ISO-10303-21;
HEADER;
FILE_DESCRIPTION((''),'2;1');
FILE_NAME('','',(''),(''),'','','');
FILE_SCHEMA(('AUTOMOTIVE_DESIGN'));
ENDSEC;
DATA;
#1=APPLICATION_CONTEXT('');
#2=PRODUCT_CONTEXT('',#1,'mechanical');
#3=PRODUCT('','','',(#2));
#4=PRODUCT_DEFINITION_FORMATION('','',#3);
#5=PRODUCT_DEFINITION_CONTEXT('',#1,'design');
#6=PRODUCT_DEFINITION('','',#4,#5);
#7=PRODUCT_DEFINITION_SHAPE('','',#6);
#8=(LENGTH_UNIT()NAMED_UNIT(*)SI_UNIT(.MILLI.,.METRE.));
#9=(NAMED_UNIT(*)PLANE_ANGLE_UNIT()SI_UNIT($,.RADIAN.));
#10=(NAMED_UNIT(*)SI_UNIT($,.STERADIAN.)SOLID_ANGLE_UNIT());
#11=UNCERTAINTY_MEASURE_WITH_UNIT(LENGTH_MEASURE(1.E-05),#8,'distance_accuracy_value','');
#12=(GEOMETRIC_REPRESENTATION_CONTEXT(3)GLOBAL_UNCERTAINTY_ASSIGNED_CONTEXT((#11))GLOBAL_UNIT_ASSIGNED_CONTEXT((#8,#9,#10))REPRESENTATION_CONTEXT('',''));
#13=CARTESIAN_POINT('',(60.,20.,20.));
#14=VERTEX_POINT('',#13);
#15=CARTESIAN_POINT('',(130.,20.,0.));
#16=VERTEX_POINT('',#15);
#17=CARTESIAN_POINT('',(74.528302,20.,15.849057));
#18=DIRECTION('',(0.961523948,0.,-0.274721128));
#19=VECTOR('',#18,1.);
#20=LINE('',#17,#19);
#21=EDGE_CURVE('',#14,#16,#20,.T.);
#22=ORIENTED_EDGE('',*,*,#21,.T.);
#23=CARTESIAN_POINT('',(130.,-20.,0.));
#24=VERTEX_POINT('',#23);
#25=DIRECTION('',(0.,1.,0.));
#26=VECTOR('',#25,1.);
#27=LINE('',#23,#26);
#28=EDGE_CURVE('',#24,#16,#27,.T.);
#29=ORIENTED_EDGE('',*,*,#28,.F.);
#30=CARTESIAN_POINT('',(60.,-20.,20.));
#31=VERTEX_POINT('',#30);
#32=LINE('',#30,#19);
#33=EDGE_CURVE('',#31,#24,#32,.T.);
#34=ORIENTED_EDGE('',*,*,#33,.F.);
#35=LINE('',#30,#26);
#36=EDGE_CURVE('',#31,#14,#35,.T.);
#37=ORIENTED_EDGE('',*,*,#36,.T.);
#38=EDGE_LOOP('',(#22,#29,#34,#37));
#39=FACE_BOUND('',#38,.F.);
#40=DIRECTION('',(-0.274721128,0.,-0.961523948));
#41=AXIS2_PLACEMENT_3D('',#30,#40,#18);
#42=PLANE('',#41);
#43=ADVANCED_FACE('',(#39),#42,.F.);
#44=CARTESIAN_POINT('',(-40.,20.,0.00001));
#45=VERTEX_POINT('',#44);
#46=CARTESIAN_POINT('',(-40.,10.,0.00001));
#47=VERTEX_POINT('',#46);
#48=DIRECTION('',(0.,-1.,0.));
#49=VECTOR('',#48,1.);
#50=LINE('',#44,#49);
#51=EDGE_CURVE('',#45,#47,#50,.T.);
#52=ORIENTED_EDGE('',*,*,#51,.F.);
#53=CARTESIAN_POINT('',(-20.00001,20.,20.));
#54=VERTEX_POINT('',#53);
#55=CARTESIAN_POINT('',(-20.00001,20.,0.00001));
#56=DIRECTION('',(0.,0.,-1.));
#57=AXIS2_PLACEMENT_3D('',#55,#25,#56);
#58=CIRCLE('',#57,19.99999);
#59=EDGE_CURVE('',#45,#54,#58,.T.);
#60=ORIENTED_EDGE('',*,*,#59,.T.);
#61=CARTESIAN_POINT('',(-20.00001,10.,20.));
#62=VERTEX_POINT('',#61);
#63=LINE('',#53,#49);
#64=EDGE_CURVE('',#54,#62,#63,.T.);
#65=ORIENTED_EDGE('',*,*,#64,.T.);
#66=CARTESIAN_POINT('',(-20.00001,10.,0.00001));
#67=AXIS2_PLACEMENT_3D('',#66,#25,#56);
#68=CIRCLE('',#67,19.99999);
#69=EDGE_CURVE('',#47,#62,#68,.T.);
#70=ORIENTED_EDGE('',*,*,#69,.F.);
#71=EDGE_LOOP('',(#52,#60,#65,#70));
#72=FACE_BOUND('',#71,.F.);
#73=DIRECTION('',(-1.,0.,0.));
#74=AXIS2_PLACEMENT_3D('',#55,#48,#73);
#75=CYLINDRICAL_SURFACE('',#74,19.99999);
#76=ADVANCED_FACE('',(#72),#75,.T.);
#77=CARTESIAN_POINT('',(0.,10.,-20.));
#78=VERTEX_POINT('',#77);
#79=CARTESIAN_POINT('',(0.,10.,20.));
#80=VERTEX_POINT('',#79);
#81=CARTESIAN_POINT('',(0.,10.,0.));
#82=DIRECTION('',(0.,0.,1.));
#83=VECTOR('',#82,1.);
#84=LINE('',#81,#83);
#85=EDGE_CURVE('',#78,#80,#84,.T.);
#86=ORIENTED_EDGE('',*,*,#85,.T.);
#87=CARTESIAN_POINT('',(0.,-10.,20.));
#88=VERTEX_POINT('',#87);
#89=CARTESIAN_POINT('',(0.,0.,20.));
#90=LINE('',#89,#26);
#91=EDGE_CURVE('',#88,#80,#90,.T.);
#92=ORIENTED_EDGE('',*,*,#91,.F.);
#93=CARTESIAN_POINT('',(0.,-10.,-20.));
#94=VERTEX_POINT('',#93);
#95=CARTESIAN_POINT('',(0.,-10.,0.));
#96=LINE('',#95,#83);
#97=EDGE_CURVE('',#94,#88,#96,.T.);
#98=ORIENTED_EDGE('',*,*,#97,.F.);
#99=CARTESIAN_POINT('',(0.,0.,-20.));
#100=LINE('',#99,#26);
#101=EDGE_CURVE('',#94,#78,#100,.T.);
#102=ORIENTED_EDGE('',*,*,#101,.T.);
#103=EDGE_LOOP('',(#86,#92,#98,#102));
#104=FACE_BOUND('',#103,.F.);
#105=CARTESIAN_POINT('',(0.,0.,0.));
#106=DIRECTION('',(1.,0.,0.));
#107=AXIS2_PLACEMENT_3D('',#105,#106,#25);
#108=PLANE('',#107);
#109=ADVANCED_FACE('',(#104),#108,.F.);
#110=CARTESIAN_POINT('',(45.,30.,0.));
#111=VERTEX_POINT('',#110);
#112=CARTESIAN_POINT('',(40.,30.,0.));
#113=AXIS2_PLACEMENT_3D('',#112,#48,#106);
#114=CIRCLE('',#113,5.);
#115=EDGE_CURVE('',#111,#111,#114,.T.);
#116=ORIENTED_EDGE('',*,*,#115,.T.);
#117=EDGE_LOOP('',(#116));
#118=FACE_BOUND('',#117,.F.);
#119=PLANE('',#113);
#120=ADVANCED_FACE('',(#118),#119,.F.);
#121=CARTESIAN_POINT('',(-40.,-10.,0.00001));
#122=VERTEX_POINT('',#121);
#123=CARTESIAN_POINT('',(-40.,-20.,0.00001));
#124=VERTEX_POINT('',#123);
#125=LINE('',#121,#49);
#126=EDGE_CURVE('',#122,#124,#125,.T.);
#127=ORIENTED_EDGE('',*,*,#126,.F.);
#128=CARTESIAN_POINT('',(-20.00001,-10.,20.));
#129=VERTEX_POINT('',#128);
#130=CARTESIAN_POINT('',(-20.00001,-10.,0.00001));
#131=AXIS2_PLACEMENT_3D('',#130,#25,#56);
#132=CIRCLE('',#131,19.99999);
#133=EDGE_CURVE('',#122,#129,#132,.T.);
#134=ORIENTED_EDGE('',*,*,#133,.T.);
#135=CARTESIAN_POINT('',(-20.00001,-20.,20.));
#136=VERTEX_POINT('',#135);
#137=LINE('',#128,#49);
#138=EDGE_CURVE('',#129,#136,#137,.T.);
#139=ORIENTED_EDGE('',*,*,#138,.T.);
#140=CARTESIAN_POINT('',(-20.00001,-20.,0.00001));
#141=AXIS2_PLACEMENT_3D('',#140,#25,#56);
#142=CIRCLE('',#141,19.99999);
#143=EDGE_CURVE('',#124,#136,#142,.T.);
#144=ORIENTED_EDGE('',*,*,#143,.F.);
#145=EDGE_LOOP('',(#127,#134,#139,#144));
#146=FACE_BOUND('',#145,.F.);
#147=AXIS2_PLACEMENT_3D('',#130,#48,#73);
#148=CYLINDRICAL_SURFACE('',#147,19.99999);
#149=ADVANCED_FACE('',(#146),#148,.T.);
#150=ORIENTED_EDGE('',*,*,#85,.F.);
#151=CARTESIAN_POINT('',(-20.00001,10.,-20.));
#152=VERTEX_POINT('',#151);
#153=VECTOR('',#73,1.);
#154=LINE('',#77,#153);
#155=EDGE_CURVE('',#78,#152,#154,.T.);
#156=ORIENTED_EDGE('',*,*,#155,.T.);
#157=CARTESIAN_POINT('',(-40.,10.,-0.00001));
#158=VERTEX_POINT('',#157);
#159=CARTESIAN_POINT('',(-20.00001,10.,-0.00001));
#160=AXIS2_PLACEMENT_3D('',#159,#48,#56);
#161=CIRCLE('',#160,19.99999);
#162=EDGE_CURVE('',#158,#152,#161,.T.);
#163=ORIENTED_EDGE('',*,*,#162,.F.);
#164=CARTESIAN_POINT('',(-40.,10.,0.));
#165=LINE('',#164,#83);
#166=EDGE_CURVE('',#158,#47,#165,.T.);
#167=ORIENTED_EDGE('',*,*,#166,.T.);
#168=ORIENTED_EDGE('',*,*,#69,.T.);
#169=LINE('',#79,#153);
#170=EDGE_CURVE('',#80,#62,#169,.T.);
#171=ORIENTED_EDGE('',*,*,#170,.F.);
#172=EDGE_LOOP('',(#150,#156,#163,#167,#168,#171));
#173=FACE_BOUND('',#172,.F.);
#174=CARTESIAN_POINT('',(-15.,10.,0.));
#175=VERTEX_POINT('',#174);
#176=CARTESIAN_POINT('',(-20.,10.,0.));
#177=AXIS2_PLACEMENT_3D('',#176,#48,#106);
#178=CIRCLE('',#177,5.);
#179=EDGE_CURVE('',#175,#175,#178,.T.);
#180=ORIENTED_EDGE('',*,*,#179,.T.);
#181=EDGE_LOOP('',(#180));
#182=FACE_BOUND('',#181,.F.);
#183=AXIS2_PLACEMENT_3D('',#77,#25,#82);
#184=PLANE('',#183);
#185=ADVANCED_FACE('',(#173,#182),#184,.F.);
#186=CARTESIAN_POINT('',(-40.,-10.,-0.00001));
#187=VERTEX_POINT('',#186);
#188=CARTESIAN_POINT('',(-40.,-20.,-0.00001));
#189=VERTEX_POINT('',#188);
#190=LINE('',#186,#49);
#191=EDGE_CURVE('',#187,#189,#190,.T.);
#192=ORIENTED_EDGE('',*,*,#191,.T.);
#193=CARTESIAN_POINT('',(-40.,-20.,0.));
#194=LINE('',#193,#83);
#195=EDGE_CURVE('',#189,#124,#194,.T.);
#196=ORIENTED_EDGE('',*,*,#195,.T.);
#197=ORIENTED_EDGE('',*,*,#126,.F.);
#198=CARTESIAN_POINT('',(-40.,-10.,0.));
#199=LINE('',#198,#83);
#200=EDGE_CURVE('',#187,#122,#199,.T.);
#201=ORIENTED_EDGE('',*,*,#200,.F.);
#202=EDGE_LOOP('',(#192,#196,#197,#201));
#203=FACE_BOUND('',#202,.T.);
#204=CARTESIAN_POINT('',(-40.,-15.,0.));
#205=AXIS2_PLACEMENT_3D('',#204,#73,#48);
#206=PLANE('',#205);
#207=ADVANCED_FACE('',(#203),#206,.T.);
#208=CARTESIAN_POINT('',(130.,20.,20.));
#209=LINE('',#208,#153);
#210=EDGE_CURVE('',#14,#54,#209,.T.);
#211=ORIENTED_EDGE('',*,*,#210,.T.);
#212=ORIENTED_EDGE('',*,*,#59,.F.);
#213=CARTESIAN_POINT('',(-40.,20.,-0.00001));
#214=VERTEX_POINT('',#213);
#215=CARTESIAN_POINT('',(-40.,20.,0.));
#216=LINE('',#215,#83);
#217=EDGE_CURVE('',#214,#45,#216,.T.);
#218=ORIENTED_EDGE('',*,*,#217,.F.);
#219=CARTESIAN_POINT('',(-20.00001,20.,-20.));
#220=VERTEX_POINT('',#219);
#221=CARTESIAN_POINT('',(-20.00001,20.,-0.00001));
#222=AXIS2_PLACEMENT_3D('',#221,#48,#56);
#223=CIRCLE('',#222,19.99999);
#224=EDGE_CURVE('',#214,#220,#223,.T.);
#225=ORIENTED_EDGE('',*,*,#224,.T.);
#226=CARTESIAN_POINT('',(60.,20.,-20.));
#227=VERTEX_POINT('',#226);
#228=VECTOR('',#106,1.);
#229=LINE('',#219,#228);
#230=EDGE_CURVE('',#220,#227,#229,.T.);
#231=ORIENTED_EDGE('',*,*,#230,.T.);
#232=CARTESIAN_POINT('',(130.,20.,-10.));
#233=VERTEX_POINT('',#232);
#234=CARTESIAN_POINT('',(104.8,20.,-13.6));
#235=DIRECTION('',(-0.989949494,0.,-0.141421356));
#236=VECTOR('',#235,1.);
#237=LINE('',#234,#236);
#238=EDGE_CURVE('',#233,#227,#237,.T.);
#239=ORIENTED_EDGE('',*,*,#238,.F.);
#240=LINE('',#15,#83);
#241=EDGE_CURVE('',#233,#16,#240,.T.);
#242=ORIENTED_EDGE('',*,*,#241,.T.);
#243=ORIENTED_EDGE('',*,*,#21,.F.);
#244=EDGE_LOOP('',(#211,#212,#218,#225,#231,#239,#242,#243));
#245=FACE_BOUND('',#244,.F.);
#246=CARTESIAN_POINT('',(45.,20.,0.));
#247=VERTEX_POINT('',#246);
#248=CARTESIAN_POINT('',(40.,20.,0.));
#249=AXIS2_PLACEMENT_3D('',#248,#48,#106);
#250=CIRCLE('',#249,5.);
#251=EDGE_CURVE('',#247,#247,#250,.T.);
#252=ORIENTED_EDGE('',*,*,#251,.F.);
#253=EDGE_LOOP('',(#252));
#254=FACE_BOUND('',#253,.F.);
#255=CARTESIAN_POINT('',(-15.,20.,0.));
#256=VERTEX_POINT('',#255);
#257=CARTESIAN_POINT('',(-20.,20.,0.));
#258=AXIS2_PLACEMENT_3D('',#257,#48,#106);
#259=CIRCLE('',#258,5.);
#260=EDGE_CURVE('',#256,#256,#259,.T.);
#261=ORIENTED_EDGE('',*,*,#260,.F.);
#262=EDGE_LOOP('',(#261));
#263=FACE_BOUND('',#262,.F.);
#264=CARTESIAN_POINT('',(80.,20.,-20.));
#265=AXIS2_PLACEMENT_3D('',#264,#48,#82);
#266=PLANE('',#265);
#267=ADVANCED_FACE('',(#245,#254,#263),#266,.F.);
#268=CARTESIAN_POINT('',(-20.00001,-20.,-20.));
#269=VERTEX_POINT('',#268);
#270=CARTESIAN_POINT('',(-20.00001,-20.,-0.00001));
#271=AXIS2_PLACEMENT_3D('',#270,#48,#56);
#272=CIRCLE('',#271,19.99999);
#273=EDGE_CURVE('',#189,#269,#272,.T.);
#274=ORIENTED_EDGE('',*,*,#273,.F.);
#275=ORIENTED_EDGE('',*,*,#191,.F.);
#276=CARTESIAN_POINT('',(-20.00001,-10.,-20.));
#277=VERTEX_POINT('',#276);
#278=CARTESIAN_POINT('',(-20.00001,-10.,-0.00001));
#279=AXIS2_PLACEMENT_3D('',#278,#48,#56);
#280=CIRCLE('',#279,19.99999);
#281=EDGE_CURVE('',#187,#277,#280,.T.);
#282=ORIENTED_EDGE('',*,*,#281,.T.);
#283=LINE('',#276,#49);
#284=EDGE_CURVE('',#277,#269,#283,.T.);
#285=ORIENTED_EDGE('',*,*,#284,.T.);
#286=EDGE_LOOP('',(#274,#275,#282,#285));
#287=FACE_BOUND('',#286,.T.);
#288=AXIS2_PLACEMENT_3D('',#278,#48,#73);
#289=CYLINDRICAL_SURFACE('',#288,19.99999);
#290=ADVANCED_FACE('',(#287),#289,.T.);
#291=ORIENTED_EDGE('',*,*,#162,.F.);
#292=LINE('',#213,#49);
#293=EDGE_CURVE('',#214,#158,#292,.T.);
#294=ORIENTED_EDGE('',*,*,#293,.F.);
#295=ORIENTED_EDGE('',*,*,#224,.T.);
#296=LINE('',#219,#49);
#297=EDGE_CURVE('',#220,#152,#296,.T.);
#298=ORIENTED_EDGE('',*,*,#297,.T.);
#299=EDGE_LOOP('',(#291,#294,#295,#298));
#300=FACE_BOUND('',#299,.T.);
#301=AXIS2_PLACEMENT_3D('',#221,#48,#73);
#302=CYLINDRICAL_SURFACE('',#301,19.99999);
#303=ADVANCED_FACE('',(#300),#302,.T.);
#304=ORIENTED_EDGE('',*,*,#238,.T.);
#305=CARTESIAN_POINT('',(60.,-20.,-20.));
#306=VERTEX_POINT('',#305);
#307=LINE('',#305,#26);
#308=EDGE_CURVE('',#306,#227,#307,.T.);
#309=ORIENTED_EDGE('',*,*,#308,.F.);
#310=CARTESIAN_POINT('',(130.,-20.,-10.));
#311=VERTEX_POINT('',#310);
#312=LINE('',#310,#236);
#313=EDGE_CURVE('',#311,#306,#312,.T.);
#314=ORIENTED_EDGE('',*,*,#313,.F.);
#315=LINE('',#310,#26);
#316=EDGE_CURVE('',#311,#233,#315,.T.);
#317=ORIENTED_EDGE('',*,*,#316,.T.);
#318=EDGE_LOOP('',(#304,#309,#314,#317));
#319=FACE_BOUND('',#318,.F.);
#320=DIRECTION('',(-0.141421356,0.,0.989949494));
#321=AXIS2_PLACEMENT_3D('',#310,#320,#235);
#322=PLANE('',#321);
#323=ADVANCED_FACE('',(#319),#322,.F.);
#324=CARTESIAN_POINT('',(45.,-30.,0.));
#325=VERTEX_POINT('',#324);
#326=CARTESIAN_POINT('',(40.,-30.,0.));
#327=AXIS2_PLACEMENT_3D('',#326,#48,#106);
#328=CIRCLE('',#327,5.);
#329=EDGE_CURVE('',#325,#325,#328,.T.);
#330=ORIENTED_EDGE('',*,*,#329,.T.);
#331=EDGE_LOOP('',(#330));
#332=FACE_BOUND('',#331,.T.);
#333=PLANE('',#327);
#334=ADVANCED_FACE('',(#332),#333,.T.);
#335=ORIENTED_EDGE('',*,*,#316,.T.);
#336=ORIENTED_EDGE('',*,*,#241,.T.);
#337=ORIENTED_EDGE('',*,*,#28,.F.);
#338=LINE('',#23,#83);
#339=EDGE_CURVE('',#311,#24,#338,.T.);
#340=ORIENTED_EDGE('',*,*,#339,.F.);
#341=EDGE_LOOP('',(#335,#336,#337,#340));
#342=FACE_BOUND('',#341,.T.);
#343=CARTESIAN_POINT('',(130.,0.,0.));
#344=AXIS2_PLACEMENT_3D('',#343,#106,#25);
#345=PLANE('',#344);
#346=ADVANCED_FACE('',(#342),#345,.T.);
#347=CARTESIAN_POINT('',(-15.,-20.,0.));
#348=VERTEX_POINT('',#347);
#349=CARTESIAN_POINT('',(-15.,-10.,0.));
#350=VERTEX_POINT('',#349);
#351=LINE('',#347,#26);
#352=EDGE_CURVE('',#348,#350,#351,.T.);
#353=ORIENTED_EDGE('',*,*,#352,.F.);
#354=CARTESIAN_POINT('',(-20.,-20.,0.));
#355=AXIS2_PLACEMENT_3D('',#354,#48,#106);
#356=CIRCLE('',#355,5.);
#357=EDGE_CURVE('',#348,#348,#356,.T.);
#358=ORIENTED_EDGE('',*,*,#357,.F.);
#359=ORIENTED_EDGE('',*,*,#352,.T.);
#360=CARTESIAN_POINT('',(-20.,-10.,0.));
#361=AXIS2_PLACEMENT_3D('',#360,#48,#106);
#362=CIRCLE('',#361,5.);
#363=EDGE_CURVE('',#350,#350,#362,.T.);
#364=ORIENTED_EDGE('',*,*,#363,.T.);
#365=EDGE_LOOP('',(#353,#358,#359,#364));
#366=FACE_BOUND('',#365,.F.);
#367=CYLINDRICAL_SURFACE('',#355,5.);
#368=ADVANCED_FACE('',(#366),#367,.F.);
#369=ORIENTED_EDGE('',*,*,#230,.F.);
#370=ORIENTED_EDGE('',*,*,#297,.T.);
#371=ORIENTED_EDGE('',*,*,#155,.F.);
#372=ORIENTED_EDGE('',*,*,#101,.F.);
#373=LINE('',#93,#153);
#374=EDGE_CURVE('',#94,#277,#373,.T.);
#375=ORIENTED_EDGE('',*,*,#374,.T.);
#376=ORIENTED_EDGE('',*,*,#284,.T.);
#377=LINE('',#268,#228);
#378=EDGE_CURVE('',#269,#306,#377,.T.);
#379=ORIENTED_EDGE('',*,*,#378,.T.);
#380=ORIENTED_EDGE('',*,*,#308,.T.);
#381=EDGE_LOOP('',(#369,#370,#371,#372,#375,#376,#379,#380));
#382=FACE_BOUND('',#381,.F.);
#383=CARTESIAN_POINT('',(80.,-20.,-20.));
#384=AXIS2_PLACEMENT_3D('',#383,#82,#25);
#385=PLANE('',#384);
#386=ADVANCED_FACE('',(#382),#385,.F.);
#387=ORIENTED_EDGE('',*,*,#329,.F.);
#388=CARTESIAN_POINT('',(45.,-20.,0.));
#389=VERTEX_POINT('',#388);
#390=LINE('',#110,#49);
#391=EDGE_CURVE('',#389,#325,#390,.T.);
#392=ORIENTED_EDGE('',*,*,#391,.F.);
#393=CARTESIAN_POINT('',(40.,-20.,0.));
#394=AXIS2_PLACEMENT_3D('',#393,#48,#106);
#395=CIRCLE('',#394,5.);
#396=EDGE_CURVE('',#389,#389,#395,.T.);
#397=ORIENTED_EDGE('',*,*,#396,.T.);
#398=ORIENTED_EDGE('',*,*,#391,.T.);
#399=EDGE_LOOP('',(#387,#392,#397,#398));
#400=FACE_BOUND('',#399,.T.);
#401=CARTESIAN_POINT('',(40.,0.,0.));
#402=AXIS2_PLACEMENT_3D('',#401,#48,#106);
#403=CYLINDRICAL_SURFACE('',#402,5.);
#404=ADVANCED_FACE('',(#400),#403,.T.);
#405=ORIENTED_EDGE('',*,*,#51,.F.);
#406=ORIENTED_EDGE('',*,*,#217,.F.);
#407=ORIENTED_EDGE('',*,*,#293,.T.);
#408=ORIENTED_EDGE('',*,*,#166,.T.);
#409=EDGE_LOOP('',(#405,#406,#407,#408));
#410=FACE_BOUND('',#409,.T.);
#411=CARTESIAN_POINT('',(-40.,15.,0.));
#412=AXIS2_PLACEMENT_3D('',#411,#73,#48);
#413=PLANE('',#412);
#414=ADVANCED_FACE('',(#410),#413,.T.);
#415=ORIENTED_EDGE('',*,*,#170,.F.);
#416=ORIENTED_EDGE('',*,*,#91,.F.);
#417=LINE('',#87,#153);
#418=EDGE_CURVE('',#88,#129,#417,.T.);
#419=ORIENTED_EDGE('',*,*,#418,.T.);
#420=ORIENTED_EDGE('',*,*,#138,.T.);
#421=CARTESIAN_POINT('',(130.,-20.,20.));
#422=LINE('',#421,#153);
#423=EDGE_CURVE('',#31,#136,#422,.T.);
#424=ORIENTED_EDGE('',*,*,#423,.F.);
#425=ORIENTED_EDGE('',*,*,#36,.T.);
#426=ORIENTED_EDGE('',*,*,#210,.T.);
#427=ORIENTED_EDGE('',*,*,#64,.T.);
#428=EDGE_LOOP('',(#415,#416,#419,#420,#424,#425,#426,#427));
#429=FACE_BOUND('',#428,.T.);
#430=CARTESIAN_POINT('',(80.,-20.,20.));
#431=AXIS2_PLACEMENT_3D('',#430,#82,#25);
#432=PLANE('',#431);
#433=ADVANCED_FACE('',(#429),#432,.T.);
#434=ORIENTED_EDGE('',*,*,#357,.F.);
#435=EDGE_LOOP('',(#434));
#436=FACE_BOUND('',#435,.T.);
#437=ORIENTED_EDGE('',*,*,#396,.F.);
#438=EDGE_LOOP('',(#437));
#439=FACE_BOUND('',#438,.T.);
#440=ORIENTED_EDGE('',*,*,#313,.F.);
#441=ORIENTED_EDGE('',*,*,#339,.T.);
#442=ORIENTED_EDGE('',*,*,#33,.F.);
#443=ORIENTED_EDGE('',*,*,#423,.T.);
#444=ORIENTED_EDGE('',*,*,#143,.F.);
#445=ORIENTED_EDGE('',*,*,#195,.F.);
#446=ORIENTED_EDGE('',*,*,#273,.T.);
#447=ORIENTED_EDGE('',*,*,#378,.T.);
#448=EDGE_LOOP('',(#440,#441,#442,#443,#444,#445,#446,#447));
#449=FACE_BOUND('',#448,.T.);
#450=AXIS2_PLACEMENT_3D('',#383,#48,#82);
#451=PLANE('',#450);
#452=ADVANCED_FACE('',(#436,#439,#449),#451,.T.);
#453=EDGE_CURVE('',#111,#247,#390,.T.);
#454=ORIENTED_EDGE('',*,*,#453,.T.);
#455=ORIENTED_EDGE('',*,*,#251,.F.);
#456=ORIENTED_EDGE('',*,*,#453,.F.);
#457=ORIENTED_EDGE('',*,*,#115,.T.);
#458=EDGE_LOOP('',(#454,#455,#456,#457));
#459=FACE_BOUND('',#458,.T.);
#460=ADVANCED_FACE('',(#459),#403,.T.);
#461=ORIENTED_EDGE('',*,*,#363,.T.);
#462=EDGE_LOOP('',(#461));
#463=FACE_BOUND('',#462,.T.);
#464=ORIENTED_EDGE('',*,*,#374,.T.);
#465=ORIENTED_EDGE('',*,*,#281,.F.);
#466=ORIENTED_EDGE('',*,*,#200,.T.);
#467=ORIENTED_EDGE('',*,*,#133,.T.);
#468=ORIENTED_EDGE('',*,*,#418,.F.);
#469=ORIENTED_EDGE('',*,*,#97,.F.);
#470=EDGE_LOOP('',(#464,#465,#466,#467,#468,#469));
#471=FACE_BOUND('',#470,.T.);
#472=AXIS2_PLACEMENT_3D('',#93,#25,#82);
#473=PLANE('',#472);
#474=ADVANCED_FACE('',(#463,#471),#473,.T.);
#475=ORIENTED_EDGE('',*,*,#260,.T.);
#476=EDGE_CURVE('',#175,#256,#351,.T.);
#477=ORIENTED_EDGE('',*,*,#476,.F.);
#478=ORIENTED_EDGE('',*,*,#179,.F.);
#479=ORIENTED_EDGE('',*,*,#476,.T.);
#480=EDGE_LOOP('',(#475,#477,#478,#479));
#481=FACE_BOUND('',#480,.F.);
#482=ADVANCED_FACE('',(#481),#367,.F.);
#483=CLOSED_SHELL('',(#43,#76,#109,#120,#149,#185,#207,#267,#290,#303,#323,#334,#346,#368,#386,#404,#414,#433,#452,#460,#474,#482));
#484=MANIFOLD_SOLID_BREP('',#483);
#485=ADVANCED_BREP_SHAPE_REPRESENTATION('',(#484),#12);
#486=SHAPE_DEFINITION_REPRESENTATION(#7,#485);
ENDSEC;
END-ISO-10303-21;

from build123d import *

# Parameters (mm, degrees)
F0_W      = 40
F0_H      = 40
F1_DEPTH  = 80
F2_W      = 10
F2_H      = 40
F3_DEPTH  = 40
F4_R      = 19.99999
F5_R      = 5
F6_DEPTH  = 40.001
F7_R      = 5
F8_DEPTH  = 30
F9_W      = 40
F9_H      = 40
F10_DEPTH = 50
F12_DEPTH = 50.001


# Not quite as in the source:
# - a fillet or chamfer is up to 0.001 mm smaller than in the source, because OpenCascade refuses the exact size


with BuildPart() as f1:
    # F0 (on Right) → F1 (new body)
    with BuildSketch(Plane.YZ):
        Rectangle(F0_W, F0_H)
    extrude(amount=F1_DEPTH)

    # F2 (on face) → F3 (join)
    with BuildSketch(Plane(origin=(0, 0, 0), x_dir=(0, -1, 0), z_dir=(-1, 0, 0))):
        with Locations((15, 0)):
            Rectangle(F2_W, F2_H)
        with Locations((-15, 0)):
            Rectangle(F2_W, F2_H)
    extrude(amount=F3_DEPTH)

    # F4 (radius 20 in the source; OpenCascade refuses exactly that, so slightly less here)
    f4_edges = [f1.edges().sort_by_distance(p)[0] for p in [
        (-40, 15, 20),
        (-40, 15, -20),
        (-40, -15, 20),
        (-40, -15, -20),
    ]]
    fillet(f4_edges, radius=F4_R)

    # F5 (on face) → F6 (cut, through all)
    with BuildSketch(Plane.XZ.offset(20)):
        with Locations((-20, 0)):
            Circle(F5_R)
    extrude(amount=-F6_DEPTH, mode=Mode.SUBTRACT)

    # F7 (on Front) → F8 (join, symmetric)
    with BuildSketch(Plane.XZ):
        with Locations((40, 0)):
            Circle(F7_R)
    extrude(amount=F8_DEPTH, both=True)

    # F9 (on face) → F10 (join)
    with BuildSketch(Plane.YZ.offset(80)):
        Rectangle(F9_W, F9_H)
    extrude(amount=F10_DEPTH)

    # F11 (on face) → F12 (cut, through all)
    with BuildSketch(Plane.XZ.offset(20)):
        Polygon((60, 20), (130, 0), (130, 20), align=None)
        Polygon((130, -20), (130, -10), (60, -20), align=None)
    extrude(amount=-F12_DEPTH, mode=Mode.SUBTRACT)


solid = f1.part
